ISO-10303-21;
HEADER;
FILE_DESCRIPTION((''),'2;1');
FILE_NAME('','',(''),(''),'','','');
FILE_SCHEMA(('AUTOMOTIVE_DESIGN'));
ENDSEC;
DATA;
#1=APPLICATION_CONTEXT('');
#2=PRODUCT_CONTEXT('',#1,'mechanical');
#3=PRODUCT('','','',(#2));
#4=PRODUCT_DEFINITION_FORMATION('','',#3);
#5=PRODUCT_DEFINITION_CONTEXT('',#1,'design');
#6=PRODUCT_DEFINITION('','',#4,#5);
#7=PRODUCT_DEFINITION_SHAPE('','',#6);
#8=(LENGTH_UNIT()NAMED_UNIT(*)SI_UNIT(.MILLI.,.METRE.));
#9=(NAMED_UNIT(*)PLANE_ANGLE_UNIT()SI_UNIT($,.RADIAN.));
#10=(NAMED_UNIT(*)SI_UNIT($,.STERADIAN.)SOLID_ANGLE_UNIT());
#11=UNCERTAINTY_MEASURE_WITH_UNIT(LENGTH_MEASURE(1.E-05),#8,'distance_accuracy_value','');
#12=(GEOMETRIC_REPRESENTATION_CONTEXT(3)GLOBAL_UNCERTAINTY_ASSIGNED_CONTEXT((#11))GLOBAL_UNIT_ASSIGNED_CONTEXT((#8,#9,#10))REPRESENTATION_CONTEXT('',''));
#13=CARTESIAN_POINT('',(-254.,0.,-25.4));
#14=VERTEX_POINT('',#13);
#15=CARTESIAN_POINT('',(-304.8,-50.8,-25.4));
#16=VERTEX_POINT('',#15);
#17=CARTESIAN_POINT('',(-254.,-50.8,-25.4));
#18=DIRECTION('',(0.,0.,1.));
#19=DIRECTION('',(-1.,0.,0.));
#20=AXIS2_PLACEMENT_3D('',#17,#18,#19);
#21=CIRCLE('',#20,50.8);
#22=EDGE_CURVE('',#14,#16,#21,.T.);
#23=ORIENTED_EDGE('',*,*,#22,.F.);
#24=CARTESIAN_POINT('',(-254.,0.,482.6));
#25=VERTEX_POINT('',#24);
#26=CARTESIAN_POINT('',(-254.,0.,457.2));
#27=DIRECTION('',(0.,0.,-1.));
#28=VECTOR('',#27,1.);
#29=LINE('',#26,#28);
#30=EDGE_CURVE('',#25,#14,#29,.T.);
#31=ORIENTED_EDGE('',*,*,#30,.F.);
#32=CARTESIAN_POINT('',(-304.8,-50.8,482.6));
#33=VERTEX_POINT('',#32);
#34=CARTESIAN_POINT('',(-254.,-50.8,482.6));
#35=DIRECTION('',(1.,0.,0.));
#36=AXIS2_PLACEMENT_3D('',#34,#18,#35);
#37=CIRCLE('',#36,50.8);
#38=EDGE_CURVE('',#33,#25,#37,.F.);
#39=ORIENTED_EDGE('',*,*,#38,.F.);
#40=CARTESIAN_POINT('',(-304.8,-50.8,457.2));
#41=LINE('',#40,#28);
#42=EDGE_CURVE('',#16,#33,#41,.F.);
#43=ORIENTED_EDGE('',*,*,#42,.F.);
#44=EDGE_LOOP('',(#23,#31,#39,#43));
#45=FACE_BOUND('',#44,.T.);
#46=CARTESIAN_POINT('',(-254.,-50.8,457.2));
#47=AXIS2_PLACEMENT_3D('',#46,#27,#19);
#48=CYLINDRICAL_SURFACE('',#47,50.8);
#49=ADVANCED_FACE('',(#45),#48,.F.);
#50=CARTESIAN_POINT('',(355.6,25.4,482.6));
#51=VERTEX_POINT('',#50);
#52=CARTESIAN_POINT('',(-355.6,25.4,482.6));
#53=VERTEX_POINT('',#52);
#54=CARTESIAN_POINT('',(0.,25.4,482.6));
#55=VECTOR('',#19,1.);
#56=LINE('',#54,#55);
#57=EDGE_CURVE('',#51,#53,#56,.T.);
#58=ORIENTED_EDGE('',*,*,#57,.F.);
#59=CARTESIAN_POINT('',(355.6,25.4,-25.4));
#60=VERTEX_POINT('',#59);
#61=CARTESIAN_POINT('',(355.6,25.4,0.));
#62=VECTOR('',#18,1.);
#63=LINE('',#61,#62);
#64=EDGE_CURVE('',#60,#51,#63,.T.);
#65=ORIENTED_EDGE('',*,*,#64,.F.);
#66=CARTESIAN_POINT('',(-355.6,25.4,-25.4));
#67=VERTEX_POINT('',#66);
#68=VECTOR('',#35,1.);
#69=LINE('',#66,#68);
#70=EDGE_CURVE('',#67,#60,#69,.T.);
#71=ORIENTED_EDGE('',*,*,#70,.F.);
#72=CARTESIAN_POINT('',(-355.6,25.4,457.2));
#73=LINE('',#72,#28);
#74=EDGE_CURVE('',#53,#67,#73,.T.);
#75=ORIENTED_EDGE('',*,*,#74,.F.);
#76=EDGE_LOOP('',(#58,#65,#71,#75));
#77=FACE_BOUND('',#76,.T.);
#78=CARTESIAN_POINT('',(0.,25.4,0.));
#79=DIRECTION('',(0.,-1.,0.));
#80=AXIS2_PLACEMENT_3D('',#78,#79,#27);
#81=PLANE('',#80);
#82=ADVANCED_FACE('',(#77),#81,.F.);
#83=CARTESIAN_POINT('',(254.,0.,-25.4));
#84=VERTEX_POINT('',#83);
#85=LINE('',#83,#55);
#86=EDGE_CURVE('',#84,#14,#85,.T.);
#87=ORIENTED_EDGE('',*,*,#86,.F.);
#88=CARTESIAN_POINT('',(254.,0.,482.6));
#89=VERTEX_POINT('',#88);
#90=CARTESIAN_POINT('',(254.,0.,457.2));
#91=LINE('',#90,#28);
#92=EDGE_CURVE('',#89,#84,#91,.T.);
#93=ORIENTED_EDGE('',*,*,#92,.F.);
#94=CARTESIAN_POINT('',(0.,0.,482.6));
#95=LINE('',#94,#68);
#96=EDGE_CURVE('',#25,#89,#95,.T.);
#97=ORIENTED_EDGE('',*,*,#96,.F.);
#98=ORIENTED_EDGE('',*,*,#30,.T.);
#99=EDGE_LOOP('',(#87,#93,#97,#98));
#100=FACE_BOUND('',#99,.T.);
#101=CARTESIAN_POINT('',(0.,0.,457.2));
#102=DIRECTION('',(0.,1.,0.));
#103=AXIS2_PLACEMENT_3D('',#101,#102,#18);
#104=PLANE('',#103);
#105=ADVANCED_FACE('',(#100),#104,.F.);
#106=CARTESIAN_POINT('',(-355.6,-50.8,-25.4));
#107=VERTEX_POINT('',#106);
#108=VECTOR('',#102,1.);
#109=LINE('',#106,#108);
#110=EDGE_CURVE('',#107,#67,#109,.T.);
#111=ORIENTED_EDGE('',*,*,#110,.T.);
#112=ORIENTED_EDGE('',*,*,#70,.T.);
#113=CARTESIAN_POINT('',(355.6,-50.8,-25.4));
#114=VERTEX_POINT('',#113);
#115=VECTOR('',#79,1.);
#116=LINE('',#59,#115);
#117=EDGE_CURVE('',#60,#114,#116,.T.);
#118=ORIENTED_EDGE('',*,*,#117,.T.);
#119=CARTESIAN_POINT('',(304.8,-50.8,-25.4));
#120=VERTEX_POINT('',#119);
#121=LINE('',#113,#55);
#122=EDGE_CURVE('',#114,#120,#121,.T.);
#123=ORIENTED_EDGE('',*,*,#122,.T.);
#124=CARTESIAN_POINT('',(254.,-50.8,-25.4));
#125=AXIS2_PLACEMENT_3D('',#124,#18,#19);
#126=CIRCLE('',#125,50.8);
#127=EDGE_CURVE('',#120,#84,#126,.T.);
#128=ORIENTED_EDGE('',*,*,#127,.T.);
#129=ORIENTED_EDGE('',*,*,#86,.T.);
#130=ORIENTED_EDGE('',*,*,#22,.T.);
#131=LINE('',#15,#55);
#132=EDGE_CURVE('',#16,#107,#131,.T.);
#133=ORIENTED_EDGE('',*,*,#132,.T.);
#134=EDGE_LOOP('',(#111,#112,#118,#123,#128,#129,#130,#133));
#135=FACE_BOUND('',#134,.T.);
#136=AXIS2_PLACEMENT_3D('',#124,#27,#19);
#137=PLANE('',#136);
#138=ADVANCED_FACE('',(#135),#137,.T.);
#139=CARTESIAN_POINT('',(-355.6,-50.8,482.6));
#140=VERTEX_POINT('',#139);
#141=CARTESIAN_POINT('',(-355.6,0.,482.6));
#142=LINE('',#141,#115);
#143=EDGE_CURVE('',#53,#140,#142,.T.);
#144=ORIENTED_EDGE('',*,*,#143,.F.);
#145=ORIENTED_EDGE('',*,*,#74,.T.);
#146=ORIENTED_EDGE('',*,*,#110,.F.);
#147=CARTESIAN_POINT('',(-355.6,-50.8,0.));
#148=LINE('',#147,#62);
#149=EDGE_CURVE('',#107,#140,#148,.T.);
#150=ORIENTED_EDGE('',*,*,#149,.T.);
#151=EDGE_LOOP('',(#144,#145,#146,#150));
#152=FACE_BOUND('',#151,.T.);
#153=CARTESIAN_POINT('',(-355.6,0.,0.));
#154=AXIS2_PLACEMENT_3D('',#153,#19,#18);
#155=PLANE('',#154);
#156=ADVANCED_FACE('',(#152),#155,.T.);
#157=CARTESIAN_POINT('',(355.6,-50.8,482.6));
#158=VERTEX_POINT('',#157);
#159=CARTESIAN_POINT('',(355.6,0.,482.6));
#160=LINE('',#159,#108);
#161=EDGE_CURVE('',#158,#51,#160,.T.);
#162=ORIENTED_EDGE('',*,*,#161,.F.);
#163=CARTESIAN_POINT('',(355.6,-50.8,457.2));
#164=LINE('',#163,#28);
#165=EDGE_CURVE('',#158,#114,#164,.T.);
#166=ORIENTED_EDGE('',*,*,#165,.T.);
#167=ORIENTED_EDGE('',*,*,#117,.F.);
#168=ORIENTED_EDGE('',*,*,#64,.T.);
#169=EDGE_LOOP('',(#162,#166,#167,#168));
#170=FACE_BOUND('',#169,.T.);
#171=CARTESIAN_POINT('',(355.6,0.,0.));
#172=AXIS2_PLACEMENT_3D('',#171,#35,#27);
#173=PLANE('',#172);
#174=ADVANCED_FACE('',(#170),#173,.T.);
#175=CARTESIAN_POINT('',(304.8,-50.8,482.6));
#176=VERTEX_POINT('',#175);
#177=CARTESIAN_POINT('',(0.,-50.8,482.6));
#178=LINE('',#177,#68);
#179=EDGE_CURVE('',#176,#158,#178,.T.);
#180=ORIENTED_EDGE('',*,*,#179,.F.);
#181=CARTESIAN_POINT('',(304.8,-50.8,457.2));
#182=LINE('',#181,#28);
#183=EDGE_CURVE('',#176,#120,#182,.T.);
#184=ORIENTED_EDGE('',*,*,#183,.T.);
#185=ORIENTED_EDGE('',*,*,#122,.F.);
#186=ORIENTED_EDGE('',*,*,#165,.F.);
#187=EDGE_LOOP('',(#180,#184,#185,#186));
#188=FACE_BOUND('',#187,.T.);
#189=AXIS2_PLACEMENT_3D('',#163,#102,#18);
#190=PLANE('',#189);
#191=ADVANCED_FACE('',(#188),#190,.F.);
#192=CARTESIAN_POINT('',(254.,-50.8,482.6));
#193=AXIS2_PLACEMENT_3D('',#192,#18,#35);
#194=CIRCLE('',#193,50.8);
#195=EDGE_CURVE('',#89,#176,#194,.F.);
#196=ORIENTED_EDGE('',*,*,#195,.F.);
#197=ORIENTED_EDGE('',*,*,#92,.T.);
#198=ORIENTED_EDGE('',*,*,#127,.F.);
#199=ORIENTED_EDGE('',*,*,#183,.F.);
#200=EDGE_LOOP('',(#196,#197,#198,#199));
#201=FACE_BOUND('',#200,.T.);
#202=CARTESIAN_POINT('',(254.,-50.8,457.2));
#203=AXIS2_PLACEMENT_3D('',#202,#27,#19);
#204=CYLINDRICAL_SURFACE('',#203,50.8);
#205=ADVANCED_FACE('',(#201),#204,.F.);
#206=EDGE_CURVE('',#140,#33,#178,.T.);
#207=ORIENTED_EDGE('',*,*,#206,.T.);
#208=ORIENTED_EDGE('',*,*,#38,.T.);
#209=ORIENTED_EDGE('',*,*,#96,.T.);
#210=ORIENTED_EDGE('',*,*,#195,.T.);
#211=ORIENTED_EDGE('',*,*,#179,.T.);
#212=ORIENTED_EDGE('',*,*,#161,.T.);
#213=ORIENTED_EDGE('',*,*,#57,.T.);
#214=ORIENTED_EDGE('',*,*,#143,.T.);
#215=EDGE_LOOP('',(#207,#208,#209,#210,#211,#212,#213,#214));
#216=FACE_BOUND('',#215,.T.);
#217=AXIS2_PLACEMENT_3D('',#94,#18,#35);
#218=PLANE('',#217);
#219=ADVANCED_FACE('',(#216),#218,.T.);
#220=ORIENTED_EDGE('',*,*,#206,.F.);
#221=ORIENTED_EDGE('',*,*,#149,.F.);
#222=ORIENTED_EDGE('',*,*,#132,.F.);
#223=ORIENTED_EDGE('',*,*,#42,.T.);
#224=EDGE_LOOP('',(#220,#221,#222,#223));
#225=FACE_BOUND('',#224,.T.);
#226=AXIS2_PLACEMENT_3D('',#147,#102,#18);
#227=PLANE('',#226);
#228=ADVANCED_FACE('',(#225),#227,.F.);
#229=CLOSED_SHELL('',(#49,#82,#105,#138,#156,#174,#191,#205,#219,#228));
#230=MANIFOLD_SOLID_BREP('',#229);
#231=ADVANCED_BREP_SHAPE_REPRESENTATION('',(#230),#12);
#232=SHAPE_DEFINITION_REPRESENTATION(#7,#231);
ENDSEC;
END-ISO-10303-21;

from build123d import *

# Parameters (mm, degrees)
STOCK_DECKMOLD_1_DEPTH = 457.2
SKETCH1_W              = 457.2
SKETCH1_H              = 76.2
BOSS_EXTRUDE1_DEPTH    = 50.8
SKETCH2_W              = 457.2
SKETCH2_H              = 76.2
BOSS_EXTRUDE2_DEPTH    = 50.8
BOSS_EXTRUDE4_DEPTH    = 25.4
BOSS_EXTRUDE5_START    = 25.4
BOSS_EXTRUDE5_DEPTH    = 25.4


# Read off the part's stored shape, not the designer's step: Stock-deckmold-1
with BuildPart() as part:
    # Stock-deckmold-1 outline → Stock-deckmold-1 (new body)
    with BuildSketch(Plane.XY):
        with BuildLine():
            Line((304.8, 25.4), (-304.8, 25.4))
            Line((-304.8, 25.4), (-304.8, -50.8))
            ThreePointArc((-304.8, -50.8), (-289.921024484, -14.878975516), (-254, 0))
            Line((-254, 0), (254, 0))
            ThreePointArc((254, 0), (289.921024484, -14.878975516), (304.8, -50.8))
            Line((304.8, -50.8), (304.8, 25.4))
        make_face()
    extrude(amount=STOCK_DECKMOLD_1_DEPTH)

    # Sketch1 → Boss-Extrude1 (add)
    with BuildSketch(Plane(origin=(304.8, 0, 0), x_dir=(0, 0, -1), z_dir=(1, 0, 0))):
        with Locations((-228.6, -12.7)):
            Rectangle(SKETCH1_W, SKETCH1_H)
    extrude(amount=BOSS_EXTRUDE1_DEPTH)

    # Sketch2 → Boss-Extrude2 (add)
    with BuildSketch(Plane.ZY.offset(304.8)):
        with Locations((228.6, -12.7)):
            Rectangle(SKETCH2_W, SKETCH2_H)
    extrude(amount=BOSS_EXTRUDE2_DEPTH)

    # Sketch3 → Boss-Extrude4 (add)
    with BuildSketch(Plane.XY.offset(457.2)):
        with BuildLine():
            Line((355.6, -50.8), (355.6, 25.4))
            Line((355.6, 25.4), (-355.6, 25.4))
            Line((-355.6, 25.4), (-355.6, -50.8))
            Line((-355.6, -50.8), (-304.8, -50.8))
            ThreePointArc((-304.8, -50.8), (-289.921024484, -14.878975516), (-254, 0))
            Line((-254, 0), (254, 0))
            ThreePointArc((254, 0), (289.921024484, -14.878975516), (304.8, -50.8))
            Line((304.8, -50.8), (355.6, -50.8))
        make_face()
    extrude(amount=BOSS_EXTRUDE4_DEPTH)

    # Sketch4 → Boss-Extrude5 (add)
    with BuildSketch(Plane(origin=(0, 0, 0), x_dir=(-1, 0, 0), z_dir=(0, 0, -1)).offset(BOSS_EXTRUDE5_START)):
        with BuildLine():
            Line((-254, 0), (254, 0))
            ThreePointArc((254, 0), (289.921024484, -14.878975516), (304.8, -50.8))
            Line((304.8, -50.8), (355.6, -50.8))
            Line((355.6, -50.8), (355.6, 25.4))
            Line((355.6, 25.4), (-355.6, 25.4))
            Line((-355.6, 25.4), (-355.6, -50.8))
            Line((-355.6, -50.8), (-304.8, -50.8))
            ThreePointArc((-304.8, -50.8), (-289.921024484, -14.878975516), (-254, 0))
        make_face()
    extrude(amount=-BOSS_EXTRUDE5_DEPTH)


solid = part.part
